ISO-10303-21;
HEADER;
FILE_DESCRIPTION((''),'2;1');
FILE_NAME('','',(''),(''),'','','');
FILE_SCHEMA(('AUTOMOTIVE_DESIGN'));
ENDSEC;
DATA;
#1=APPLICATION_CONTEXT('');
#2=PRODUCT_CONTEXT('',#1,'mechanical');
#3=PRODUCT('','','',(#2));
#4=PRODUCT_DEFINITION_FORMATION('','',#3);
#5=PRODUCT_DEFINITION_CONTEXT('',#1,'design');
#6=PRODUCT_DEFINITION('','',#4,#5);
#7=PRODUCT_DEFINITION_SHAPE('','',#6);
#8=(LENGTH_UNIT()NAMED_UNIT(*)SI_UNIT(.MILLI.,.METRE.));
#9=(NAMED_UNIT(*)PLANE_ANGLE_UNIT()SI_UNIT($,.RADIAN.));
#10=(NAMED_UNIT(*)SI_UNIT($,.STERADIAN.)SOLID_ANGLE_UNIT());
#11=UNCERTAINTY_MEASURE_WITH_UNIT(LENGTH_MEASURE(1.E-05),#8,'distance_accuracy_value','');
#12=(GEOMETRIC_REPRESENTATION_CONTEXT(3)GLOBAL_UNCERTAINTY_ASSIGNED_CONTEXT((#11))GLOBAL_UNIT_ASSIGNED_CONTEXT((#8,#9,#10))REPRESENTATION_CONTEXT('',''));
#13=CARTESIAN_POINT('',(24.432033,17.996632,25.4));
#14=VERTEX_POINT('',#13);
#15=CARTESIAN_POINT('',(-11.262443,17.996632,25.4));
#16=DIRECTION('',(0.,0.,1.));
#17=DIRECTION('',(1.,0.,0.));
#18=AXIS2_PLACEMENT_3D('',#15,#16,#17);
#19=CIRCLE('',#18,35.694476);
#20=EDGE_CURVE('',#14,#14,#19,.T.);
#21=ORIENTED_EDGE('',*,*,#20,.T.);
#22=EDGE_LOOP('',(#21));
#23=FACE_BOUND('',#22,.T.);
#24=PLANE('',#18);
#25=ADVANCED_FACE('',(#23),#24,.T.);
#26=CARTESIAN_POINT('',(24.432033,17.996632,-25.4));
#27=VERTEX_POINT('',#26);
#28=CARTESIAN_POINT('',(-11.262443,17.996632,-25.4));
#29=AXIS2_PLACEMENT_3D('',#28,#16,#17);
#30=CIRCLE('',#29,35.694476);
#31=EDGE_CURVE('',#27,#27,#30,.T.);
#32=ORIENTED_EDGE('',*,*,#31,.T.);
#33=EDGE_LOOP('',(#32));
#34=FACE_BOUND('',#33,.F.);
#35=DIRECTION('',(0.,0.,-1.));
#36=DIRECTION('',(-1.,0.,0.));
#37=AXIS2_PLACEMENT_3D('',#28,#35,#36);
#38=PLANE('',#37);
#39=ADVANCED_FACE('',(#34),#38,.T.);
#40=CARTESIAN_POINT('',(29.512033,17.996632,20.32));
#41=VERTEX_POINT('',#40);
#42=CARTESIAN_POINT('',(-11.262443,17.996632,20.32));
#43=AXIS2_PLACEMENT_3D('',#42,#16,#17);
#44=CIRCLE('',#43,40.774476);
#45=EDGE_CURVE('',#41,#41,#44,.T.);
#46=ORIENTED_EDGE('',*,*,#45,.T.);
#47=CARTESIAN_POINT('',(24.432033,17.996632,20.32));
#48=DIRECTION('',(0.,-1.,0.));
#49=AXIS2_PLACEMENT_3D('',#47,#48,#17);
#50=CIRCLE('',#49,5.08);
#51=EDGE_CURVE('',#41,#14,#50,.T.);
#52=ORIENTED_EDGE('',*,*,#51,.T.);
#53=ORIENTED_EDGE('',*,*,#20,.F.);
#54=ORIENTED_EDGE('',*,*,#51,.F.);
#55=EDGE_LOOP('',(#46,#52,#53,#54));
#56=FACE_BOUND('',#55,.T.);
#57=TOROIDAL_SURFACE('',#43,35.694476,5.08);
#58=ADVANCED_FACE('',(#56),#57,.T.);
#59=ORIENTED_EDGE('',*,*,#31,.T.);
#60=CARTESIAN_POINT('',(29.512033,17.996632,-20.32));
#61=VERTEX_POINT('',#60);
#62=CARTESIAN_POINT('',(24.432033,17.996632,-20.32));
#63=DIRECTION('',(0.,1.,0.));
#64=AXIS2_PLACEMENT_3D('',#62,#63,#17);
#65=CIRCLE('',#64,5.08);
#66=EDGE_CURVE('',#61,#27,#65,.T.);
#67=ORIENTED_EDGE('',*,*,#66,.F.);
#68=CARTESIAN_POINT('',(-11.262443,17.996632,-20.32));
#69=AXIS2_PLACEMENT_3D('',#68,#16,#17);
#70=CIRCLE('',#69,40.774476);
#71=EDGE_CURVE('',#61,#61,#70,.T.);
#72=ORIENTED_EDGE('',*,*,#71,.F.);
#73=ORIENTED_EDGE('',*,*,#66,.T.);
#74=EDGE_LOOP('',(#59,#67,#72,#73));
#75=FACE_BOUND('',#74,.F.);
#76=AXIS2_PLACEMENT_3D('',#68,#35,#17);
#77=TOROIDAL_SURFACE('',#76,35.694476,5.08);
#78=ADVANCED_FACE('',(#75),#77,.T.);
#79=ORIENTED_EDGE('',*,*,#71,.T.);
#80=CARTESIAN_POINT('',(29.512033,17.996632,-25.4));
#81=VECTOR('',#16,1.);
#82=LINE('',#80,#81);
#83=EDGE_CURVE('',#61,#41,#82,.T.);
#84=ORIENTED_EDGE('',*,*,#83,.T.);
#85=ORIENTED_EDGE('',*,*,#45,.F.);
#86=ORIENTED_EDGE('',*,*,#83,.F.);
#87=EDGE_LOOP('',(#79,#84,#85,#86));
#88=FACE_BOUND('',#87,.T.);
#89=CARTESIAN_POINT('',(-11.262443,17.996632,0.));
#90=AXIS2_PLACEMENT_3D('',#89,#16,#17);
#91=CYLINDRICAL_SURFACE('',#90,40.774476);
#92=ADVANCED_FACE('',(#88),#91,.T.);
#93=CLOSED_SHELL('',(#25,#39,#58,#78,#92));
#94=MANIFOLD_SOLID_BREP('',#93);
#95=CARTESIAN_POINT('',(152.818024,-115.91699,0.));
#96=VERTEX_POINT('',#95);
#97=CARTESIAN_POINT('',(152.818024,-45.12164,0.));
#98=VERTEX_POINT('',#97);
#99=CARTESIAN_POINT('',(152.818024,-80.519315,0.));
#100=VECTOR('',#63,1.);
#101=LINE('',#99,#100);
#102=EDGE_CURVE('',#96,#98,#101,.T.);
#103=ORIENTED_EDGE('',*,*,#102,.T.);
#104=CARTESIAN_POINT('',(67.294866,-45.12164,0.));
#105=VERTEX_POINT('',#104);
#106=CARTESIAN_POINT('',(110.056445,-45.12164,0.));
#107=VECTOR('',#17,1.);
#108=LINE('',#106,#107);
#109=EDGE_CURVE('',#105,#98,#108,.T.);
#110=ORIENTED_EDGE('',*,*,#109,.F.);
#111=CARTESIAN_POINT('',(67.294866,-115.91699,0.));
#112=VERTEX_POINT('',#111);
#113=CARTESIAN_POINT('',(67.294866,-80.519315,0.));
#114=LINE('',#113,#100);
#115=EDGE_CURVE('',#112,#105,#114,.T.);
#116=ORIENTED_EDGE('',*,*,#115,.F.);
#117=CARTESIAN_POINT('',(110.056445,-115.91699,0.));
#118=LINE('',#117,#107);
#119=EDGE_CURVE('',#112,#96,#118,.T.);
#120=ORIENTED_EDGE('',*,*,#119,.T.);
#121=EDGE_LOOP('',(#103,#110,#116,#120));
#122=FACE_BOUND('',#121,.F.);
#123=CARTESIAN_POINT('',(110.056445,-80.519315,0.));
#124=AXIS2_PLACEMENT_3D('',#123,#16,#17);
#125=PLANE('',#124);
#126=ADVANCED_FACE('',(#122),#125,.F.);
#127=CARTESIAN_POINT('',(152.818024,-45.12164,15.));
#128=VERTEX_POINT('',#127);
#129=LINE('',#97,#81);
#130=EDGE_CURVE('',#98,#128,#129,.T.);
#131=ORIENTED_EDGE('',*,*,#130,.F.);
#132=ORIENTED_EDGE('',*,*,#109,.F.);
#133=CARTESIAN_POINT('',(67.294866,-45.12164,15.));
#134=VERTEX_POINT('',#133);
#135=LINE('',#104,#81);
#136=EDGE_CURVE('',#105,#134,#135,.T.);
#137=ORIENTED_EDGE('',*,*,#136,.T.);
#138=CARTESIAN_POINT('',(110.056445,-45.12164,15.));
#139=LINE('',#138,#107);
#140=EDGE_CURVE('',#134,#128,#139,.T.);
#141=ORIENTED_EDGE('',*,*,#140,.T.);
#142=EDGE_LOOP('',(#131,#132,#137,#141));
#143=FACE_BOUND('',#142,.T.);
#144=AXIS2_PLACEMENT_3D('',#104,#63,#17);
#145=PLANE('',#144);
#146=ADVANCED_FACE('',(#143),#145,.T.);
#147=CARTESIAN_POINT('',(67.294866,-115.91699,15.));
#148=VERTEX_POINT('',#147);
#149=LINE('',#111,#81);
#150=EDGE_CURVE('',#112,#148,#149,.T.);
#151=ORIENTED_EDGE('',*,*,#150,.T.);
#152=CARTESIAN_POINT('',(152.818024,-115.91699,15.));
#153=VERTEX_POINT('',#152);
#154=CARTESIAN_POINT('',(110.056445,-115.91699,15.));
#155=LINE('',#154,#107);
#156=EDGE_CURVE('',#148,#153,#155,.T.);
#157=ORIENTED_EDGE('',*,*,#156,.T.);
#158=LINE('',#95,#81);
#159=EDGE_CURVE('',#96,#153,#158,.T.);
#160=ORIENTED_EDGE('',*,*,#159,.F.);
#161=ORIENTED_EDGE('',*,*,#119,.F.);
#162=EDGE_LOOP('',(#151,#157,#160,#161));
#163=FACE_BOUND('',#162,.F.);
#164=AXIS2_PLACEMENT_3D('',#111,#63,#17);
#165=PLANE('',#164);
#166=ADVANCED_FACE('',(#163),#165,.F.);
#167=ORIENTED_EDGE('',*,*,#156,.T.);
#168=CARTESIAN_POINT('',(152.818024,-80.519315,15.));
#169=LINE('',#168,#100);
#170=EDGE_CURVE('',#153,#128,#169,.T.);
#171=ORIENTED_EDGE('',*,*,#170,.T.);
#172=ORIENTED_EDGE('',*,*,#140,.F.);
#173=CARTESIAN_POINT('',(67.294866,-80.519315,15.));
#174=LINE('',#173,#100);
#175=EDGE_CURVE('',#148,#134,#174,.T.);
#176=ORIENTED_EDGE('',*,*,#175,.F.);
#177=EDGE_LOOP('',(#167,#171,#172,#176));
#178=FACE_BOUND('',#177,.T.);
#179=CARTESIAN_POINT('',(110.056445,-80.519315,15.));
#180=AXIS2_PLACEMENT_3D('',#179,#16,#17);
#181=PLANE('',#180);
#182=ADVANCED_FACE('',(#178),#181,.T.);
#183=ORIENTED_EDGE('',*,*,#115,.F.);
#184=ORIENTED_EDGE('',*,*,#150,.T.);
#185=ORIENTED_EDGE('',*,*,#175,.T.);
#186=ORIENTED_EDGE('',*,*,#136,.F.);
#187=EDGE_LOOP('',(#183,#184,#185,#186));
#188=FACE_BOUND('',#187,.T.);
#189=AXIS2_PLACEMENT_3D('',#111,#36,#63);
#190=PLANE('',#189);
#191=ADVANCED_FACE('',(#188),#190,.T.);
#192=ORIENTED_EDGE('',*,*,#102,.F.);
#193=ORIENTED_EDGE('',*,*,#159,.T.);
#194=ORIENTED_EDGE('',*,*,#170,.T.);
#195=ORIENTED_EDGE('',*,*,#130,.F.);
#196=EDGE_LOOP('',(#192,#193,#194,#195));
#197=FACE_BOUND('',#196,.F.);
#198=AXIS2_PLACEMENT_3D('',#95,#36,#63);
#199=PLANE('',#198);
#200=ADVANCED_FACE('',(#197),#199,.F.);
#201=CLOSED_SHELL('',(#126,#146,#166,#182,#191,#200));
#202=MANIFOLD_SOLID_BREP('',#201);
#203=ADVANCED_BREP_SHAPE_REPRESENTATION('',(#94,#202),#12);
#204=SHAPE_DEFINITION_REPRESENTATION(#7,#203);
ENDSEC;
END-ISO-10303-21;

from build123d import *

# Parameters (mm, degrees)
F0_R     = 40.7744755984
F1_DEPTH = 25.4
F3_R     = 5.08
F4_R     = 5.08
F7_W     = 85.5231583118
F7_H     = 70.7953497767
F8_DEPTH = 15


with BuildPart() as f1:
    # F0 (on Top) → F1 (new body)
    with BuildSketch(Plane.XY):
        with Locations((-11.2624429166, 17.9966315627)):
            Circle(F0_R)
    extrude(amount=F1_DEPTH)

    # F2: F1 across plane


with BuildPart() as f1_1:
    add(f1.part)
    add(f1.part.mirror(Plane.XY))

    # F3
    f3_edges = [f1_1.edges().sort_by_distance(p)[0] for p in [
        (-52.036919, 17.996632, 25.4),
    ]]
    fillet(f3_edges, radius=F3_R)

    # F4
    f4_edges = [f1_1.edges().sort_by_distance(p)[0] for p in [
        (-52.036919, 17.996632, -25.4),
    ]]
    fillet(f4_edges, radius=F4_R)


with BuildPart() as f8:
    # F7 (on Top) → F8 (new body)
    with BuildSketch(Plane.XY):
        with Locations((110.0564450026, -80.5193148553)):
            Rectangle(F7_W, F7_H)
    extrude(amount=F8_DEPTH)


solid = Compound([f1_1.part, f8.part])
